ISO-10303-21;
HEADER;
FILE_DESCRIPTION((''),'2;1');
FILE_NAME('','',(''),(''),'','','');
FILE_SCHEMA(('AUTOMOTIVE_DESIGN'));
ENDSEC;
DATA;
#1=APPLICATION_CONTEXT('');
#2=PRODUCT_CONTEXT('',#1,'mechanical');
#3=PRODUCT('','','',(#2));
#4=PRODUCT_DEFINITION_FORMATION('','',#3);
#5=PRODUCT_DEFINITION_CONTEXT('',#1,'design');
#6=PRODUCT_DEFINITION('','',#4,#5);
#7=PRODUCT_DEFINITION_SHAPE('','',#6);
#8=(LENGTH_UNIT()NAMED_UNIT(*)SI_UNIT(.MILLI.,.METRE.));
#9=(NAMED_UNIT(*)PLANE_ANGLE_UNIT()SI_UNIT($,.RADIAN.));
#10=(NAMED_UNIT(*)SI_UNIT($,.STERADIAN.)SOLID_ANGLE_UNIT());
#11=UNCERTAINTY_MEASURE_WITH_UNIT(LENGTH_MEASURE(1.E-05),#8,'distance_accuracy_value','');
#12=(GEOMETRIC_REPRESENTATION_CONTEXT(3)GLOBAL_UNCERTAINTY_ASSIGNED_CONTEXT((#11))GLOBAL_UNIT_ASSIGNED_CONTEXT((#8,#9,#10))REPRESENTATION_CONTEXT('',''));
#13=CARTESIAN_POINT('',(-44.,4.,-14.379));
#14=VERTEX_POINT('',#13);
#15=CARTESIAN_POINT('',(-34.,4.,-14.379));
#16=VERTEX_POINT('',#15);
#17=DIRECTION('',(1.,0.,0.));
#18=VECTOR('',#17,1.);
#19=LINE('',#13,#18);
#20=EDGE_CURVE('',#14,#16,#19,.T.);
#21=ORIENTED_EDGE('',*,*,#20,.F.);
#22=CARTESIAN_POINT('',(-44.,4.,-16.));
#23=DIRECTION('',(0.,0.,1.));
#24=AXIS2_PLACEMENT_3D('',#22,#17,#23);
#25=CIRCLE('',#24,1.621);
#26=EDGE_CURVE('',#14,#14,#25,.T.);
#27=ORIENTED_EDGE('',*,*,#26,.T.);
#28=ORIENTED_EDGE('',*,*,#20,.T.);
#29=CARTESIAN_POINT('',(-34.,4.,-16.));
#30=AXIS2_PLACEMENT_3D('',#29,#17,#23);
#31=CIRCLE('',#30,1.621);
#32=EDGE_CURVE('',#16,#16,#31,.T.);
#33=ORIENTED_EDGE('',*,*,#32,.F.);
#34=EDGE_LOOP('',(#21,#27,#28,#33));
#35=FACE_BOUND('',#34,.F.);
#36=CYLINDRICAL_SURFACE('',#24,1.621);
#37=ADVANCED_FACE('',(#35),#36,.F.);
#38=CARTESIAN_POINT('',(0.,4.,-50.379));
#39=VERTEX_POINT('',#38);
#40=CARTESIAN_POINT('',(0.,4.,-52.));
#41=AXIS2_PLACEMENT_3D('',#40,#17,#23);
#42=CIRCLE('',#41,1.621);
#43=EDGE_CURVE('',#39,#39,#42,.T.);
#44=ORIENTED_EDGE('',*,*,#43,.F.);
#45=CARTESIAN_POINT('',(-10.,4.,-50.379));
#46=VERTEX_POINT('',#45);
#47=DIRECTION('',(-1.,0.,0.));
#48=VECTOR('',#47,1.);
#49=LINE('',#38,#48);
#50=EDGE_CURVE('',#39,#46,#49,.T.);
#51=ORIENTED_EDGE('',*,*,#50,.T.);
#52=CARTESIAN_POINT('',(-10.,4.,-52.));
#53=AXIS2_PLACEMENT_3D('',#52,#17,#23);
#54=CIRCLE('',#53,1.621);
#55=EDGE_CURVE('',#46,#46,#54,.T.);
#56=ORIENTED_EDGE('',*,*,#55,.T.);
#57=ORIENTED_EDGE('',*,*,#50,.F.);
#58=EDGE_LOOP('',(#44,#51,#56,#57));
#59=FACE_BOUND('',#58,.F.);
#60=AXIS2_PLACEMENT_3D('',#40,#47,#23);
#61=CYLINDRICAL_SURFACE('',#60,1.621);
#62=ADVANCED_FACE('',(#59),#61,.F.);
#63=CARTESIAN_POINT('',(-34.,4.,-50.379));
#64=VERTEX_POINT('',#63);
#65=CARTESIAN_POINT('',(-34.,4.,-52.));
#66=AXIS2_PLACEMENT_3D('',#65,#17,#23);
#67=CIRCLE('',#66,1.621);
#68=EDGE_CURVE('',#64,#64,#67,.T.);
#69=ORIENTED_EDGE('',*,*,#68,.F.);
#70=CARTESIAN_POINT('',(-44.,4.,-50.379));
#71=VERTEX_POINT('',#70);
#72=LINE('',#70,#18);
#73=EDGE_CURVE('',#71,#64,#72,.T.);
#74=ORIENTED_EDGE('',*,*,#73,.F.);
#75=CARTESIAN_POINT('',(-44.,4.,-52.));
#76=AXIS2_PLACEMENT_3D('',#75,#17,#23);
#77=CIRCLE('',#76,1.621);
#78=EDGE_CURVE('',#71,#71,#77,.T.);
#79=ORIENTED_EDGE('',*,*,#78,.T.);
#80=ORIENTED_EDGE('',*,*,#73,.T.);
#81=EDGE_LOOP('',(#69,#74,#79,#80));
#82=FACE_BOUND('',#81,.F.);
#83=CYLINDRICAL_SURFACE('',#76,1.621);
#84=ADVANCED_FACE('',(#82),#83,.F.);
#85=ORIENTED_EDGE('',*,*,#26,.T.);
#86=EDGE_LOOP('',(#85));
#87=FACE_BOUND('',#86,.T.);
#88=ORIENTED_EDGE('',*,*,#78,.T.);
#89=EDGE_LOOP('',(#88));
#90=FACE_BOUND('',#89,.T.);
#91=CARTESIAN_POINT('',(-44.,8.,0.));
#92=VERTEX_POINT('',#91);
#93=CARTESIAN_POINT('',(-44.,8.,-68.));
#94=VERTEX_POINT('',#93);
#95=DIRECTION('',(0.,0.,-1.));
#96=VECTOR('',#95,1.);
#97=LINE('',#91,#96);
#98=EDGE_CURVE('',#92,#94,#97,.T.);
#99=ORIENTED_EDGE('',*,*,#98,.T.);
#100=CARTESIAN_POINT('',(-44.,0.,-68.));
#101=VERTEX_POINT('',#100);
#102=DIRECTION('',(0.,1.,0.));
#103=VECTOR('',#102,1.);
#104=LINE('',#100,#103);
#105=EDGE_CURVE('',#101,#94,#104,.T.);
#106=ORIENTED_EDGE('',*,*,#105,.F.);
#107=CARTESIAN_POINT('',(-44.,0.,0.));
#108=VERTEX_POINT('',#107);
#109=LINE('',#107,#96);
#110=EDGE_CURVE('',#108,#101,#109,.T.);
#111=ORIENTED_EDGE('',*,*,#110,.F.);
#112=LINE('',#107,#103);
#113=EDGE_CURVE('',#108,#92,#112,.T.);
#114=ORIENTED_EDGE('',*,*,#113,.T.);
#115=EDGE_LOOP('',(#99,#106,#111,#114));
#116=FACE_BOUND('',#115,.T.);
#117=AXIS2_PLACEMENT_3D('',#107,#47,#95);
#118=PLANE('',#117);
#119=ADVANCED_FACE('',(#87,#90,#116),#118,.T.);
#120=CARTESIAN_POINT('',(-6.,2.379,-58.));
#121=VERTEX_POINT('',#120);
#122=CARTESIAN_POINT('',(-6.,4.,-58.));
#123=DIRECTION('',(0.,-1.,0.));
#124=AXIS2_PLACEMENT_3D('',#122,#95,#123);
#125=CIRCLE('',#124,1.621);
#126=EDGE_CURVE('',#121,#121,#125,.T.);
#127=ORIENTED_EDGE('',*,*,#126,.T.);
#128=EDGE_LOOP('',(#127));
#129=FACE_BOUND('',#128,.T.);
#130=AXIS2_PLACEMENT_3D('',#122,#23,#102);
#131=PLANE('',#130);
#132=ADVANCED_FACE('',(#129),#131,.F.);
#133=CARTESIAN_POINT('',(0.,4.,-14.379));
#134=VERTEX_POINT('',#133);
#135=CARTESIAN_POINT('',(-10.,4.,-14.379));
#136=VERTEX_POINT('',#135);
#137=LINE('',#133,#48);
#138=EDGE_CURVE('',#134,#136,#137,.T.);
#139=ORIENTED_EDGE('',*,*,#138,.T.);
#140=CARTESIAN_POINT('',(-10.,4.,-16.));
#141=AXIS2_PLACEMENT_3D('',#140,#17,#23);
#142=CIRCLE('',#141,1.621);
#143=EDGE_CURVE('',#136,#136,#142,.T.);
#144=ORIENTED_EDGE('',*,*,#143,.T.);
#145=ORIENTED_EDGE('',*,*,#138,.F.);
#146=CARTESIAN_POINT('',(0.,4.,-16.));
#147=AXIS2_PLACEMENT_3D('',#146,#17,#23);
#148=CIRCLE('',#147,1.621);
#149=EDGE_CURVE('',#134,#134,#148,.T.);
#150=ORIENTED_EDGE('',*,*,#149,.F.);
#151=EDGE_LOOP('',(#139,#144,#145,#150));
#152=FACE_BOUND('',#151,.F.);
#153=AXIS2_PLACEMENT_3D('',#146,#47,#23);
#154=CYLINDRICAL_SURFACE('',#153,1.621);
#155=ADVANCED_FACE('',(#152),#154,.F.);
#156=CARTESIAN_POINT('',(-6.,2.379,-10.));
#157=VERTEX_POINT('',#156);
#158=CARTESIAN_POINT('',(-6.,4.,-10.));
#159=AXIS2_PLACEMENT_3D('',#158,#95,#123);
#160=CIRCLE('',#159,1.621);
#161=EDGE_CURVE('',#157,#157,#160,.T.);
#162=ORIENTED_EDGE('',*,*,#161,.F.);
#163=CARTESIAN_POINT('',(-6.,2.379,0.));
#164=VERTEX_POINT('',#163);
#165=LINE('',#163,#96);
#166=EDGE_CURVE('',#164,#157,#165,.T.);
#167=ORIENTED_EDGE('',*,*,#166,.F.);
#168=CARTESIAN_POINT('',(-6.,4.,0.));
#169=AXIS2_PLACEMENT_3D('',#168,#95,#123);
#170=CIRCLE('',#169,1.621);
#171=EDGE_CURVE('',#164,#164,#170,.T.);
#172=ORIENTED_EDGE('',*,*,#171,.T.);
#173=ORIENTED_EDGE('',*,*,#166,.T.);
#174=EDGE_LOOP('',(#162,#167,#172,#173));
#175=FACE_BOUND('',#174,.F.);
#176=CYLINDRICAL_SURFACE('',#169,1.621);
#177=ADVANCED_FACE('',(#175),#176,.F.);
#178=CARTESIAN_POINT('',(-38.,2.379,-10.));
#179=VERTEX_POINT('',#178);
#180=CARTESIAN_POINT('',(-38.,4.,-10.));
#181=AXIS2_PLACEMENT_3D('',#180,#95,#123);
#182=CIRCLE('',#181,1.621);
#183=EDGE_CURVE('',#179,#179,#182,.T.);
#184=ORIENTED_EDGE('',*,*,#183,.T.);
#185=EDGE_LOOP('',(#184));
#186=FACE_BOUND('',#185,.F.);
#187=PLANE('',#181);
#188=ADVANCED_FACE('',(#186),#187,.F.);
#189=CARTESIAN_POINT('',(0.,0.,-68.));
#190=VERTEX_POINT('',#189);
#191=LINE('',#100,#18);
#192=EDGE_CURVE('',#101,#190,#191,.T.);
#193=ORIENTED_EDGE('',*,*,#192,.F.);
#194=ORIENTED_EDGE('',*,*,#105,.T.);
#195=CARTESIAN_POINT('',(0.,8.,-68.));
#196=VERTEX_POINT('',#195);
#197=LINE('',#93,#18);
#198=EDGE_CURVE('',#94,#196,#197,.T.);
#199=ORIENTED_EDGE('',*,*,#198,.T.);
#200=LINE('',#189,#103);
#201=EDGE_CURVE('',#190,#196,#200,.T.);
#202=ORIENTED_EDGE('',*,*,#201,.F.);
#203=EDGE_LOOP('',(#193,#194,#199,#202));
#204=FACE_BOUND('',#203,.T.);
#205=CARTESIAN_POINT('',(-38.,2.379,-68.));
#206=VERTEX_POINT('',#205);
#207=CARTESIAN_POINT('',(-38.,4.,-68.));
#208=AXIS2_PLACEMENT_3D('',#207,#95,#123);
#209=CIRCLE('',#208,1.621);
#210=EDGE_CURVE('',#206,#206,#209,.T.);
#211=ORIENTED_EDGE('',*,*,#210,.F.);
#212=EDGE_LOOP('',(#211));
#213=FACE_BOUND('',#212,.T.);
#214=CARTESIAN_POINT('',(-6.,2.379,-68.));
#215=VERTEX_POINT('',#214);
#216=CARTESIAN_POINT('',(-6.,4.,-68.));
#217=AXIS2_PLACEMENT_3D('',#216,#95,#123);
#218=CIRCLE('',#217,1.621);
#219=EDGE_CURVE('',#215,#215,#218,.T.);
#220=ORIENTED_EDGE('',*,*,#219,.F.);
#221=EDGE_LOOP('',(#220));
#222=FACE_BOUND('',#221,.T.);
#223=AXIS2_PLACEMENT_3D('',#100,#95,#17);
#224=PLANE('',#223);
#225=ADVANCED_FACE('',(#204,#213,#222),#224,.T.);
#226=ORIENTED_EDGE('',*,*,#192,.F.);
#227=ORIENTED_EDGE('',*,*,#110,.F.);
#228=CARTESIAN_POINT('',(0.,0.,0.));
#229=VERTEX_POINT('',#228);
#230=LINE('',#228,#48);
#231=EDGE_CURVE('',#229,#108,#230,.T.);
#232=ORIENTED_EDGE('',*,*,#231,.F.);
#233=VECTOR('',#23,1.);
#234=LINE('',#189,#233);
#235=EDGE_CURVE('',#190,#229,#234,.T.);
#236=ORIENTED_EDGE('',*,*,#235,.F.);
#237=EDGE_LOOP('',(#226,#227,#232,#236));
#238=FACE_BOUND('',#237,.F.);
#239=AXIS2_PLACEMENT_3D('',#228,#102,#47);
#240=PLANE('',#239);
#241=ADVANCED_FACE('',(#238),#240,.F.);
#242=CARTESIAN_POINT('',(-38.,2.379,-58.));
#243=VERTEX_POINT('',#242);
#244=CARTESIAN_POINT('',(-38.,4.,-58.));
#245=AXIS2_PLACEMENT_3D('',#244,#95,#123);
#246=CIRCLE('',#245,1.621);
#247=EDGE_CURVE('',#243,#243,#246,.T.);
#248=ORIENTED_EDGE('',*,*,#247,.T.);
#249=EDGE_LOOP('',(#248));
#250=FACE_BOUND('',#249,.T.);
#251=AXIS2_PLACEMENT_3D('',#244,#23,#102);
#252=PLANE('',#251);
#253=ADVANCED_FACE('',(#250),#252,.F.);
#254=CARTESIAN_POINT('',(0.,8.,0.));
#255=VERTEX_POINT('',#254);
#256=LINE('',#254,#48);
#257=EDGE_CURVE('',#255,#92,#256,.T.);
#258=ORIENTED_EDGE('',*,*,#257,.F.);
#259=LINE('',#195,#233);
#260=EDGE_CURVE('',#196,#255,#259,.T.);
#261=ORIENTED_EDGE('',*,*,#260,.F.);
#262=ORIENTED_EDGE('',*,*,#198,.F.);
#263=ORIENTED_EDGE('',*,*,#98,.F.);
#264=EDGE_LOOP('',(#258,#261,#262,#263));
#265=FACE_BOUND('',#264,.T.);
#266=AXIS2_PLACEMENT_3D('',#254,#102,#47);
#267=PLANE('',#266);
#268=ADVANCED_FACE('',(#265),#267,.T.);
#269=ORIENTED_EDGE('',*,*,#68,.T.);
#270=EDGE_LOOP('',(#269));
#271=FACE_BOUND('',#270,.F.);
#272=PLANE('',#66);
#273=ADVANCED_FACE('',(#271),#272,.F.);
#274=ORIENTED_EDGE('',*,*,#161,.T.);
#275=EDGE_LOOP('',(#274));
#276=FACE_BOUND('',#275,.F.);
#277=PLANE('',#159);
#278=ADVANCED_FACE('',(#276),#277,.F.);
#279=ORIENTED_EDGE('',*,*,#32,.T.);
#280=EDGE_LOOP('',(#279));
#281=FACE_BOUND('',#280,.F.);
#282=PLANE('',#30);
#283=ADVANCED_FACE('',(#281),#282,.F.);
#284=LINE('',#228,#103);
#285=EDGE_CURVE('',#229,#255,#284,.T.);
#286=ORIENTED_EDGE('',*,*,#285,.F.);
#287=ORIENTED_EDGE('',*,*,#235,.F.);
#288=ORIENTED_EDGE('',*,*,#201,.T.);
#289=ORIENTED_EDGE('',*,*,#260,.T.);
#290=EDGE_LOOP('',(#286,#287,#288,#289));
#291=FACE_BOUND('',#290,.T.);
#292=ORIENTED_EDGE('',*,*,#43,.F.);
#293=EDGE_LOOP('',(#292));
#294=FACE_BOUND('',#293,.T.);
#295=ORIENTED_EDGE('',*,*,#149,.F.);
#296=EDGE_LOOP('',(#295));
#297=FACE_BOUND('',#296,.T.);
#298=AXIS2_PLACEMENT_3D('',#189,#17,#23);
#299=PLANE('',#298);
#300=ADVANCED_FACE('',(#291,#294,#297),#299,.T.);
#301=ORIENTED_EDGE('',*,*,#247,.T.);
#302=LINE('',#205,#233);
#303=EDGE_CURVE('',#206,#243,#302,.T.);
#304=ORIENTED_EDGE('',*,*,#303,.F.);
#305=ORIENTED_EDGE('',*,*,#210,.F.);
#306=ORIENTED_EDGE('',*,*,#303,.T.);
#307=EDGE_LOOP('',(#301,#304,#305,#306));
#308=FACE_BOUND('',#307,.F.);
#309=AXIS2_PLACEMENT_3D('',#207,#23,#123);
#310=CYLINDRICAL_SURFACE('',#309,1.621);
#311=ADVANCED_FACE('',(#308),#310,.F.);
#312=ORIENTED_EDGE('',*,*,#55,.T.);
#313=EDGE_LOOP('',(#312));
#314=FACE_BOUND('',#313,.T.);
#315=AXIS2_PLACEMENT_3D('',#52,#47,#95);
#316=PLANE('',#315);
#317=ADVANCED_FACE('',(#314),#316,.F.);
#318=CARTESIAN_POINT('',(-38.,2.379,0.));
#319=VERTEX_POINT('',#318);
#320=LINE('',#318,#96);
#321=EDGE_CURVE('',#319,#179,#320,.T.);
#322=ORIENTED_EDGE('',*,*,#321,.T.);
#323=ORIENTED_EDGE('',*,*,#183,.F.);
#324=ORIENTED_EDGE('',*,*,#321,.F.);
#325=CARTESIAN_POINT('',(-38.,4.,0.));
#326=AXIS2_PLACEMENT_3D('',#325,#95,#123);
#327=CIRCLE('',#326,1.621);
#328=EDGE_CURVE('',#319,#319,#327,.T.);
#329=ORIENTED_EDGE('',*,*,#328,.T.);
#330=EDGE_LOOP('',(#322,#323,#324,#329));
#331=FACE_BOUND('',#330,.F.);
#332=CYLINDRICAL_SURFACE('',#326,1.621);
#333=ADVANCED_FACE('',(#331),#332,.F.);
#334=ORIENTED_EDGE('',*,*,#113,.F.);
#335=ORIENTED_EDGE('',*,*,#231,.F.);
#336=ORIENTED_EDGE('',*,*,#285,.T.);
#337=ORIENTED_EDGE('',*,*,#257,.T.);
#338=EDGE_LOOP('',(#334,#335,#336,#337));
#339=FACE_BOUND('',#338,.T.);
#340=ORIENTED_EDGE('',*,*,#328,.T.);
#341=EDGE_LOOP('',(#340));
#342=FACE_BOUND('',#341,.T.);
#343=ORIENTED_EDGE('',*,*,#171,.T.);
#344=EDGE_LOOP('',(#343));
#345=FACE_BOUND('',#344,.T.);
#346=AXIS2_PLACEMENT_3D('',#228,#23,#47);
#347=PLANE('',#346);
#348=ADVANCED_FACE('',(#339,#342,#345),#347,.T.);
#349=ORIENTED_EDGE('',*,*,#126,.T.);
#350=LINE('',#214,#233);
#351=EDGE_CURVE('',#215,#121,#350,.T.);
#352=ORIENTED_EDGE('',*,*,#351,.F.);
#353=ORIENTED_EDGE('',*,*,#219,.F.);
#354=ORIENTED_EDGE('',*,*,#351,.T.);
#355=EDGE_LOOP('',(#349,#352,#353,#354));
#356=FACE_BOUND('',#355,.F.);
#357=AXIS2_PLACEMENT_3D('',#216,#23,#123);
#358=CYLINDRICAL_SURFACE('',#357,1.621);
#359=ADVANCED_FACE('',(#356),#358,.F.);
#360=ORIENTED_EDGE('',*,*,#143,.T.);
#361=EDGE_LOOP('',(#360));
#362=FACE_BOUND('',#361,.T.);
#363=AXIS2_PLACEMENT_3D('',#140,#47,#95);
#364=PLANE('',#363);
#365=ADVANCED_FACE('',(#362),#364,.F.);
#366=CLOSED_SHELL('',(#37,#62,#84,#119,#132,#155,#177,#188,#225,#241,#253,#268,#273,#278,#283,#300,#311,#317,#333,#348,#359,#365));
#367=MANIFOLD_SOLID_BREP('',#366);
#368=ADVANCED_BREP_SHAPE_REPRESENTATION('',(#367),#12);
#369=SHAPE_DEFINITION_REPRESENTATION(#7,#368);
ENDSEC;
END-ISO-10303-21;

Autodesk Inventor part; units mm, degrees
ref_plane "XZ Plane" through (0, 0, 0) normal (0, 1, 0) x (-1, 0, 0)
sketch "Skizze1" plane through (0, 0, 0) normal (0, 1, 0) x (-1, 0, 0)
  line L0 (0, 0) -> (44, 0)
  line L1 (44, 0) -> (44, -68)
  line L2 (44, -68) -> (0, -68)
  line L3 (0, -68) -> (0, 0)
  dimension "d0" = 44
  dimension "d1" = 68
extrude "Extrusion1" add sketch "Skizze1" along normal blind 8
sketch "Skizze2" plane through (-44, 0, 0) normal (0, 0, 1) x (1, 0, 0)
  line L0 (44, 0) -> (44, 8) projected
  point P0 (38, 4)
  point P1 (6, 4)
  point P2 (44, 4)
  dimension "d4" = 32
  dimension "d5" = 6
hole "Bohrung1" at (-6, 4, 0) at (-38, 4, 0) direction (0, 0, -1) diameter 3.242 depth 10 thread size "M4x0.7" class "6H" standard "ISO Metric profile"
ref_plane "Arbeitsebene1" through (0, 0, -34) normal (0, 0, 1) x (1, 0, 0)
mirror "Spiegeln1" about plane through (0, 0, -34) normal (0, 0, 1) of "Bohrung1"
sketch "Skizze3" plane through (-44, 0, -68) normal (-1, 0, 0) x (0, 0, 1)
  line L0 (68, 0) -> (68, 8) projected
  point P0 (52, 4)
  point P1 (16, 4)
  point P2 (68, 4)
  dimension "d21" = 16
  dimension "d22" = 36
hole "Bohrung2" at (-44, 4, -16) at (-44, 4, -52) direction (1, 0, 0) diameter 3.242 depth 10 thread size "M4x0.7" class "6H" standard "ISO Metric profile"
ref_plane "Arbeitsebene2" through (-22, 0, 0) normal (1, 0, 0) x (0, 1, 0)
mirror "Spiegeln2" about plane through (-22, 0, 0) normal (1, 0, 0) of "Bohrung2"
properties part number "1013"
